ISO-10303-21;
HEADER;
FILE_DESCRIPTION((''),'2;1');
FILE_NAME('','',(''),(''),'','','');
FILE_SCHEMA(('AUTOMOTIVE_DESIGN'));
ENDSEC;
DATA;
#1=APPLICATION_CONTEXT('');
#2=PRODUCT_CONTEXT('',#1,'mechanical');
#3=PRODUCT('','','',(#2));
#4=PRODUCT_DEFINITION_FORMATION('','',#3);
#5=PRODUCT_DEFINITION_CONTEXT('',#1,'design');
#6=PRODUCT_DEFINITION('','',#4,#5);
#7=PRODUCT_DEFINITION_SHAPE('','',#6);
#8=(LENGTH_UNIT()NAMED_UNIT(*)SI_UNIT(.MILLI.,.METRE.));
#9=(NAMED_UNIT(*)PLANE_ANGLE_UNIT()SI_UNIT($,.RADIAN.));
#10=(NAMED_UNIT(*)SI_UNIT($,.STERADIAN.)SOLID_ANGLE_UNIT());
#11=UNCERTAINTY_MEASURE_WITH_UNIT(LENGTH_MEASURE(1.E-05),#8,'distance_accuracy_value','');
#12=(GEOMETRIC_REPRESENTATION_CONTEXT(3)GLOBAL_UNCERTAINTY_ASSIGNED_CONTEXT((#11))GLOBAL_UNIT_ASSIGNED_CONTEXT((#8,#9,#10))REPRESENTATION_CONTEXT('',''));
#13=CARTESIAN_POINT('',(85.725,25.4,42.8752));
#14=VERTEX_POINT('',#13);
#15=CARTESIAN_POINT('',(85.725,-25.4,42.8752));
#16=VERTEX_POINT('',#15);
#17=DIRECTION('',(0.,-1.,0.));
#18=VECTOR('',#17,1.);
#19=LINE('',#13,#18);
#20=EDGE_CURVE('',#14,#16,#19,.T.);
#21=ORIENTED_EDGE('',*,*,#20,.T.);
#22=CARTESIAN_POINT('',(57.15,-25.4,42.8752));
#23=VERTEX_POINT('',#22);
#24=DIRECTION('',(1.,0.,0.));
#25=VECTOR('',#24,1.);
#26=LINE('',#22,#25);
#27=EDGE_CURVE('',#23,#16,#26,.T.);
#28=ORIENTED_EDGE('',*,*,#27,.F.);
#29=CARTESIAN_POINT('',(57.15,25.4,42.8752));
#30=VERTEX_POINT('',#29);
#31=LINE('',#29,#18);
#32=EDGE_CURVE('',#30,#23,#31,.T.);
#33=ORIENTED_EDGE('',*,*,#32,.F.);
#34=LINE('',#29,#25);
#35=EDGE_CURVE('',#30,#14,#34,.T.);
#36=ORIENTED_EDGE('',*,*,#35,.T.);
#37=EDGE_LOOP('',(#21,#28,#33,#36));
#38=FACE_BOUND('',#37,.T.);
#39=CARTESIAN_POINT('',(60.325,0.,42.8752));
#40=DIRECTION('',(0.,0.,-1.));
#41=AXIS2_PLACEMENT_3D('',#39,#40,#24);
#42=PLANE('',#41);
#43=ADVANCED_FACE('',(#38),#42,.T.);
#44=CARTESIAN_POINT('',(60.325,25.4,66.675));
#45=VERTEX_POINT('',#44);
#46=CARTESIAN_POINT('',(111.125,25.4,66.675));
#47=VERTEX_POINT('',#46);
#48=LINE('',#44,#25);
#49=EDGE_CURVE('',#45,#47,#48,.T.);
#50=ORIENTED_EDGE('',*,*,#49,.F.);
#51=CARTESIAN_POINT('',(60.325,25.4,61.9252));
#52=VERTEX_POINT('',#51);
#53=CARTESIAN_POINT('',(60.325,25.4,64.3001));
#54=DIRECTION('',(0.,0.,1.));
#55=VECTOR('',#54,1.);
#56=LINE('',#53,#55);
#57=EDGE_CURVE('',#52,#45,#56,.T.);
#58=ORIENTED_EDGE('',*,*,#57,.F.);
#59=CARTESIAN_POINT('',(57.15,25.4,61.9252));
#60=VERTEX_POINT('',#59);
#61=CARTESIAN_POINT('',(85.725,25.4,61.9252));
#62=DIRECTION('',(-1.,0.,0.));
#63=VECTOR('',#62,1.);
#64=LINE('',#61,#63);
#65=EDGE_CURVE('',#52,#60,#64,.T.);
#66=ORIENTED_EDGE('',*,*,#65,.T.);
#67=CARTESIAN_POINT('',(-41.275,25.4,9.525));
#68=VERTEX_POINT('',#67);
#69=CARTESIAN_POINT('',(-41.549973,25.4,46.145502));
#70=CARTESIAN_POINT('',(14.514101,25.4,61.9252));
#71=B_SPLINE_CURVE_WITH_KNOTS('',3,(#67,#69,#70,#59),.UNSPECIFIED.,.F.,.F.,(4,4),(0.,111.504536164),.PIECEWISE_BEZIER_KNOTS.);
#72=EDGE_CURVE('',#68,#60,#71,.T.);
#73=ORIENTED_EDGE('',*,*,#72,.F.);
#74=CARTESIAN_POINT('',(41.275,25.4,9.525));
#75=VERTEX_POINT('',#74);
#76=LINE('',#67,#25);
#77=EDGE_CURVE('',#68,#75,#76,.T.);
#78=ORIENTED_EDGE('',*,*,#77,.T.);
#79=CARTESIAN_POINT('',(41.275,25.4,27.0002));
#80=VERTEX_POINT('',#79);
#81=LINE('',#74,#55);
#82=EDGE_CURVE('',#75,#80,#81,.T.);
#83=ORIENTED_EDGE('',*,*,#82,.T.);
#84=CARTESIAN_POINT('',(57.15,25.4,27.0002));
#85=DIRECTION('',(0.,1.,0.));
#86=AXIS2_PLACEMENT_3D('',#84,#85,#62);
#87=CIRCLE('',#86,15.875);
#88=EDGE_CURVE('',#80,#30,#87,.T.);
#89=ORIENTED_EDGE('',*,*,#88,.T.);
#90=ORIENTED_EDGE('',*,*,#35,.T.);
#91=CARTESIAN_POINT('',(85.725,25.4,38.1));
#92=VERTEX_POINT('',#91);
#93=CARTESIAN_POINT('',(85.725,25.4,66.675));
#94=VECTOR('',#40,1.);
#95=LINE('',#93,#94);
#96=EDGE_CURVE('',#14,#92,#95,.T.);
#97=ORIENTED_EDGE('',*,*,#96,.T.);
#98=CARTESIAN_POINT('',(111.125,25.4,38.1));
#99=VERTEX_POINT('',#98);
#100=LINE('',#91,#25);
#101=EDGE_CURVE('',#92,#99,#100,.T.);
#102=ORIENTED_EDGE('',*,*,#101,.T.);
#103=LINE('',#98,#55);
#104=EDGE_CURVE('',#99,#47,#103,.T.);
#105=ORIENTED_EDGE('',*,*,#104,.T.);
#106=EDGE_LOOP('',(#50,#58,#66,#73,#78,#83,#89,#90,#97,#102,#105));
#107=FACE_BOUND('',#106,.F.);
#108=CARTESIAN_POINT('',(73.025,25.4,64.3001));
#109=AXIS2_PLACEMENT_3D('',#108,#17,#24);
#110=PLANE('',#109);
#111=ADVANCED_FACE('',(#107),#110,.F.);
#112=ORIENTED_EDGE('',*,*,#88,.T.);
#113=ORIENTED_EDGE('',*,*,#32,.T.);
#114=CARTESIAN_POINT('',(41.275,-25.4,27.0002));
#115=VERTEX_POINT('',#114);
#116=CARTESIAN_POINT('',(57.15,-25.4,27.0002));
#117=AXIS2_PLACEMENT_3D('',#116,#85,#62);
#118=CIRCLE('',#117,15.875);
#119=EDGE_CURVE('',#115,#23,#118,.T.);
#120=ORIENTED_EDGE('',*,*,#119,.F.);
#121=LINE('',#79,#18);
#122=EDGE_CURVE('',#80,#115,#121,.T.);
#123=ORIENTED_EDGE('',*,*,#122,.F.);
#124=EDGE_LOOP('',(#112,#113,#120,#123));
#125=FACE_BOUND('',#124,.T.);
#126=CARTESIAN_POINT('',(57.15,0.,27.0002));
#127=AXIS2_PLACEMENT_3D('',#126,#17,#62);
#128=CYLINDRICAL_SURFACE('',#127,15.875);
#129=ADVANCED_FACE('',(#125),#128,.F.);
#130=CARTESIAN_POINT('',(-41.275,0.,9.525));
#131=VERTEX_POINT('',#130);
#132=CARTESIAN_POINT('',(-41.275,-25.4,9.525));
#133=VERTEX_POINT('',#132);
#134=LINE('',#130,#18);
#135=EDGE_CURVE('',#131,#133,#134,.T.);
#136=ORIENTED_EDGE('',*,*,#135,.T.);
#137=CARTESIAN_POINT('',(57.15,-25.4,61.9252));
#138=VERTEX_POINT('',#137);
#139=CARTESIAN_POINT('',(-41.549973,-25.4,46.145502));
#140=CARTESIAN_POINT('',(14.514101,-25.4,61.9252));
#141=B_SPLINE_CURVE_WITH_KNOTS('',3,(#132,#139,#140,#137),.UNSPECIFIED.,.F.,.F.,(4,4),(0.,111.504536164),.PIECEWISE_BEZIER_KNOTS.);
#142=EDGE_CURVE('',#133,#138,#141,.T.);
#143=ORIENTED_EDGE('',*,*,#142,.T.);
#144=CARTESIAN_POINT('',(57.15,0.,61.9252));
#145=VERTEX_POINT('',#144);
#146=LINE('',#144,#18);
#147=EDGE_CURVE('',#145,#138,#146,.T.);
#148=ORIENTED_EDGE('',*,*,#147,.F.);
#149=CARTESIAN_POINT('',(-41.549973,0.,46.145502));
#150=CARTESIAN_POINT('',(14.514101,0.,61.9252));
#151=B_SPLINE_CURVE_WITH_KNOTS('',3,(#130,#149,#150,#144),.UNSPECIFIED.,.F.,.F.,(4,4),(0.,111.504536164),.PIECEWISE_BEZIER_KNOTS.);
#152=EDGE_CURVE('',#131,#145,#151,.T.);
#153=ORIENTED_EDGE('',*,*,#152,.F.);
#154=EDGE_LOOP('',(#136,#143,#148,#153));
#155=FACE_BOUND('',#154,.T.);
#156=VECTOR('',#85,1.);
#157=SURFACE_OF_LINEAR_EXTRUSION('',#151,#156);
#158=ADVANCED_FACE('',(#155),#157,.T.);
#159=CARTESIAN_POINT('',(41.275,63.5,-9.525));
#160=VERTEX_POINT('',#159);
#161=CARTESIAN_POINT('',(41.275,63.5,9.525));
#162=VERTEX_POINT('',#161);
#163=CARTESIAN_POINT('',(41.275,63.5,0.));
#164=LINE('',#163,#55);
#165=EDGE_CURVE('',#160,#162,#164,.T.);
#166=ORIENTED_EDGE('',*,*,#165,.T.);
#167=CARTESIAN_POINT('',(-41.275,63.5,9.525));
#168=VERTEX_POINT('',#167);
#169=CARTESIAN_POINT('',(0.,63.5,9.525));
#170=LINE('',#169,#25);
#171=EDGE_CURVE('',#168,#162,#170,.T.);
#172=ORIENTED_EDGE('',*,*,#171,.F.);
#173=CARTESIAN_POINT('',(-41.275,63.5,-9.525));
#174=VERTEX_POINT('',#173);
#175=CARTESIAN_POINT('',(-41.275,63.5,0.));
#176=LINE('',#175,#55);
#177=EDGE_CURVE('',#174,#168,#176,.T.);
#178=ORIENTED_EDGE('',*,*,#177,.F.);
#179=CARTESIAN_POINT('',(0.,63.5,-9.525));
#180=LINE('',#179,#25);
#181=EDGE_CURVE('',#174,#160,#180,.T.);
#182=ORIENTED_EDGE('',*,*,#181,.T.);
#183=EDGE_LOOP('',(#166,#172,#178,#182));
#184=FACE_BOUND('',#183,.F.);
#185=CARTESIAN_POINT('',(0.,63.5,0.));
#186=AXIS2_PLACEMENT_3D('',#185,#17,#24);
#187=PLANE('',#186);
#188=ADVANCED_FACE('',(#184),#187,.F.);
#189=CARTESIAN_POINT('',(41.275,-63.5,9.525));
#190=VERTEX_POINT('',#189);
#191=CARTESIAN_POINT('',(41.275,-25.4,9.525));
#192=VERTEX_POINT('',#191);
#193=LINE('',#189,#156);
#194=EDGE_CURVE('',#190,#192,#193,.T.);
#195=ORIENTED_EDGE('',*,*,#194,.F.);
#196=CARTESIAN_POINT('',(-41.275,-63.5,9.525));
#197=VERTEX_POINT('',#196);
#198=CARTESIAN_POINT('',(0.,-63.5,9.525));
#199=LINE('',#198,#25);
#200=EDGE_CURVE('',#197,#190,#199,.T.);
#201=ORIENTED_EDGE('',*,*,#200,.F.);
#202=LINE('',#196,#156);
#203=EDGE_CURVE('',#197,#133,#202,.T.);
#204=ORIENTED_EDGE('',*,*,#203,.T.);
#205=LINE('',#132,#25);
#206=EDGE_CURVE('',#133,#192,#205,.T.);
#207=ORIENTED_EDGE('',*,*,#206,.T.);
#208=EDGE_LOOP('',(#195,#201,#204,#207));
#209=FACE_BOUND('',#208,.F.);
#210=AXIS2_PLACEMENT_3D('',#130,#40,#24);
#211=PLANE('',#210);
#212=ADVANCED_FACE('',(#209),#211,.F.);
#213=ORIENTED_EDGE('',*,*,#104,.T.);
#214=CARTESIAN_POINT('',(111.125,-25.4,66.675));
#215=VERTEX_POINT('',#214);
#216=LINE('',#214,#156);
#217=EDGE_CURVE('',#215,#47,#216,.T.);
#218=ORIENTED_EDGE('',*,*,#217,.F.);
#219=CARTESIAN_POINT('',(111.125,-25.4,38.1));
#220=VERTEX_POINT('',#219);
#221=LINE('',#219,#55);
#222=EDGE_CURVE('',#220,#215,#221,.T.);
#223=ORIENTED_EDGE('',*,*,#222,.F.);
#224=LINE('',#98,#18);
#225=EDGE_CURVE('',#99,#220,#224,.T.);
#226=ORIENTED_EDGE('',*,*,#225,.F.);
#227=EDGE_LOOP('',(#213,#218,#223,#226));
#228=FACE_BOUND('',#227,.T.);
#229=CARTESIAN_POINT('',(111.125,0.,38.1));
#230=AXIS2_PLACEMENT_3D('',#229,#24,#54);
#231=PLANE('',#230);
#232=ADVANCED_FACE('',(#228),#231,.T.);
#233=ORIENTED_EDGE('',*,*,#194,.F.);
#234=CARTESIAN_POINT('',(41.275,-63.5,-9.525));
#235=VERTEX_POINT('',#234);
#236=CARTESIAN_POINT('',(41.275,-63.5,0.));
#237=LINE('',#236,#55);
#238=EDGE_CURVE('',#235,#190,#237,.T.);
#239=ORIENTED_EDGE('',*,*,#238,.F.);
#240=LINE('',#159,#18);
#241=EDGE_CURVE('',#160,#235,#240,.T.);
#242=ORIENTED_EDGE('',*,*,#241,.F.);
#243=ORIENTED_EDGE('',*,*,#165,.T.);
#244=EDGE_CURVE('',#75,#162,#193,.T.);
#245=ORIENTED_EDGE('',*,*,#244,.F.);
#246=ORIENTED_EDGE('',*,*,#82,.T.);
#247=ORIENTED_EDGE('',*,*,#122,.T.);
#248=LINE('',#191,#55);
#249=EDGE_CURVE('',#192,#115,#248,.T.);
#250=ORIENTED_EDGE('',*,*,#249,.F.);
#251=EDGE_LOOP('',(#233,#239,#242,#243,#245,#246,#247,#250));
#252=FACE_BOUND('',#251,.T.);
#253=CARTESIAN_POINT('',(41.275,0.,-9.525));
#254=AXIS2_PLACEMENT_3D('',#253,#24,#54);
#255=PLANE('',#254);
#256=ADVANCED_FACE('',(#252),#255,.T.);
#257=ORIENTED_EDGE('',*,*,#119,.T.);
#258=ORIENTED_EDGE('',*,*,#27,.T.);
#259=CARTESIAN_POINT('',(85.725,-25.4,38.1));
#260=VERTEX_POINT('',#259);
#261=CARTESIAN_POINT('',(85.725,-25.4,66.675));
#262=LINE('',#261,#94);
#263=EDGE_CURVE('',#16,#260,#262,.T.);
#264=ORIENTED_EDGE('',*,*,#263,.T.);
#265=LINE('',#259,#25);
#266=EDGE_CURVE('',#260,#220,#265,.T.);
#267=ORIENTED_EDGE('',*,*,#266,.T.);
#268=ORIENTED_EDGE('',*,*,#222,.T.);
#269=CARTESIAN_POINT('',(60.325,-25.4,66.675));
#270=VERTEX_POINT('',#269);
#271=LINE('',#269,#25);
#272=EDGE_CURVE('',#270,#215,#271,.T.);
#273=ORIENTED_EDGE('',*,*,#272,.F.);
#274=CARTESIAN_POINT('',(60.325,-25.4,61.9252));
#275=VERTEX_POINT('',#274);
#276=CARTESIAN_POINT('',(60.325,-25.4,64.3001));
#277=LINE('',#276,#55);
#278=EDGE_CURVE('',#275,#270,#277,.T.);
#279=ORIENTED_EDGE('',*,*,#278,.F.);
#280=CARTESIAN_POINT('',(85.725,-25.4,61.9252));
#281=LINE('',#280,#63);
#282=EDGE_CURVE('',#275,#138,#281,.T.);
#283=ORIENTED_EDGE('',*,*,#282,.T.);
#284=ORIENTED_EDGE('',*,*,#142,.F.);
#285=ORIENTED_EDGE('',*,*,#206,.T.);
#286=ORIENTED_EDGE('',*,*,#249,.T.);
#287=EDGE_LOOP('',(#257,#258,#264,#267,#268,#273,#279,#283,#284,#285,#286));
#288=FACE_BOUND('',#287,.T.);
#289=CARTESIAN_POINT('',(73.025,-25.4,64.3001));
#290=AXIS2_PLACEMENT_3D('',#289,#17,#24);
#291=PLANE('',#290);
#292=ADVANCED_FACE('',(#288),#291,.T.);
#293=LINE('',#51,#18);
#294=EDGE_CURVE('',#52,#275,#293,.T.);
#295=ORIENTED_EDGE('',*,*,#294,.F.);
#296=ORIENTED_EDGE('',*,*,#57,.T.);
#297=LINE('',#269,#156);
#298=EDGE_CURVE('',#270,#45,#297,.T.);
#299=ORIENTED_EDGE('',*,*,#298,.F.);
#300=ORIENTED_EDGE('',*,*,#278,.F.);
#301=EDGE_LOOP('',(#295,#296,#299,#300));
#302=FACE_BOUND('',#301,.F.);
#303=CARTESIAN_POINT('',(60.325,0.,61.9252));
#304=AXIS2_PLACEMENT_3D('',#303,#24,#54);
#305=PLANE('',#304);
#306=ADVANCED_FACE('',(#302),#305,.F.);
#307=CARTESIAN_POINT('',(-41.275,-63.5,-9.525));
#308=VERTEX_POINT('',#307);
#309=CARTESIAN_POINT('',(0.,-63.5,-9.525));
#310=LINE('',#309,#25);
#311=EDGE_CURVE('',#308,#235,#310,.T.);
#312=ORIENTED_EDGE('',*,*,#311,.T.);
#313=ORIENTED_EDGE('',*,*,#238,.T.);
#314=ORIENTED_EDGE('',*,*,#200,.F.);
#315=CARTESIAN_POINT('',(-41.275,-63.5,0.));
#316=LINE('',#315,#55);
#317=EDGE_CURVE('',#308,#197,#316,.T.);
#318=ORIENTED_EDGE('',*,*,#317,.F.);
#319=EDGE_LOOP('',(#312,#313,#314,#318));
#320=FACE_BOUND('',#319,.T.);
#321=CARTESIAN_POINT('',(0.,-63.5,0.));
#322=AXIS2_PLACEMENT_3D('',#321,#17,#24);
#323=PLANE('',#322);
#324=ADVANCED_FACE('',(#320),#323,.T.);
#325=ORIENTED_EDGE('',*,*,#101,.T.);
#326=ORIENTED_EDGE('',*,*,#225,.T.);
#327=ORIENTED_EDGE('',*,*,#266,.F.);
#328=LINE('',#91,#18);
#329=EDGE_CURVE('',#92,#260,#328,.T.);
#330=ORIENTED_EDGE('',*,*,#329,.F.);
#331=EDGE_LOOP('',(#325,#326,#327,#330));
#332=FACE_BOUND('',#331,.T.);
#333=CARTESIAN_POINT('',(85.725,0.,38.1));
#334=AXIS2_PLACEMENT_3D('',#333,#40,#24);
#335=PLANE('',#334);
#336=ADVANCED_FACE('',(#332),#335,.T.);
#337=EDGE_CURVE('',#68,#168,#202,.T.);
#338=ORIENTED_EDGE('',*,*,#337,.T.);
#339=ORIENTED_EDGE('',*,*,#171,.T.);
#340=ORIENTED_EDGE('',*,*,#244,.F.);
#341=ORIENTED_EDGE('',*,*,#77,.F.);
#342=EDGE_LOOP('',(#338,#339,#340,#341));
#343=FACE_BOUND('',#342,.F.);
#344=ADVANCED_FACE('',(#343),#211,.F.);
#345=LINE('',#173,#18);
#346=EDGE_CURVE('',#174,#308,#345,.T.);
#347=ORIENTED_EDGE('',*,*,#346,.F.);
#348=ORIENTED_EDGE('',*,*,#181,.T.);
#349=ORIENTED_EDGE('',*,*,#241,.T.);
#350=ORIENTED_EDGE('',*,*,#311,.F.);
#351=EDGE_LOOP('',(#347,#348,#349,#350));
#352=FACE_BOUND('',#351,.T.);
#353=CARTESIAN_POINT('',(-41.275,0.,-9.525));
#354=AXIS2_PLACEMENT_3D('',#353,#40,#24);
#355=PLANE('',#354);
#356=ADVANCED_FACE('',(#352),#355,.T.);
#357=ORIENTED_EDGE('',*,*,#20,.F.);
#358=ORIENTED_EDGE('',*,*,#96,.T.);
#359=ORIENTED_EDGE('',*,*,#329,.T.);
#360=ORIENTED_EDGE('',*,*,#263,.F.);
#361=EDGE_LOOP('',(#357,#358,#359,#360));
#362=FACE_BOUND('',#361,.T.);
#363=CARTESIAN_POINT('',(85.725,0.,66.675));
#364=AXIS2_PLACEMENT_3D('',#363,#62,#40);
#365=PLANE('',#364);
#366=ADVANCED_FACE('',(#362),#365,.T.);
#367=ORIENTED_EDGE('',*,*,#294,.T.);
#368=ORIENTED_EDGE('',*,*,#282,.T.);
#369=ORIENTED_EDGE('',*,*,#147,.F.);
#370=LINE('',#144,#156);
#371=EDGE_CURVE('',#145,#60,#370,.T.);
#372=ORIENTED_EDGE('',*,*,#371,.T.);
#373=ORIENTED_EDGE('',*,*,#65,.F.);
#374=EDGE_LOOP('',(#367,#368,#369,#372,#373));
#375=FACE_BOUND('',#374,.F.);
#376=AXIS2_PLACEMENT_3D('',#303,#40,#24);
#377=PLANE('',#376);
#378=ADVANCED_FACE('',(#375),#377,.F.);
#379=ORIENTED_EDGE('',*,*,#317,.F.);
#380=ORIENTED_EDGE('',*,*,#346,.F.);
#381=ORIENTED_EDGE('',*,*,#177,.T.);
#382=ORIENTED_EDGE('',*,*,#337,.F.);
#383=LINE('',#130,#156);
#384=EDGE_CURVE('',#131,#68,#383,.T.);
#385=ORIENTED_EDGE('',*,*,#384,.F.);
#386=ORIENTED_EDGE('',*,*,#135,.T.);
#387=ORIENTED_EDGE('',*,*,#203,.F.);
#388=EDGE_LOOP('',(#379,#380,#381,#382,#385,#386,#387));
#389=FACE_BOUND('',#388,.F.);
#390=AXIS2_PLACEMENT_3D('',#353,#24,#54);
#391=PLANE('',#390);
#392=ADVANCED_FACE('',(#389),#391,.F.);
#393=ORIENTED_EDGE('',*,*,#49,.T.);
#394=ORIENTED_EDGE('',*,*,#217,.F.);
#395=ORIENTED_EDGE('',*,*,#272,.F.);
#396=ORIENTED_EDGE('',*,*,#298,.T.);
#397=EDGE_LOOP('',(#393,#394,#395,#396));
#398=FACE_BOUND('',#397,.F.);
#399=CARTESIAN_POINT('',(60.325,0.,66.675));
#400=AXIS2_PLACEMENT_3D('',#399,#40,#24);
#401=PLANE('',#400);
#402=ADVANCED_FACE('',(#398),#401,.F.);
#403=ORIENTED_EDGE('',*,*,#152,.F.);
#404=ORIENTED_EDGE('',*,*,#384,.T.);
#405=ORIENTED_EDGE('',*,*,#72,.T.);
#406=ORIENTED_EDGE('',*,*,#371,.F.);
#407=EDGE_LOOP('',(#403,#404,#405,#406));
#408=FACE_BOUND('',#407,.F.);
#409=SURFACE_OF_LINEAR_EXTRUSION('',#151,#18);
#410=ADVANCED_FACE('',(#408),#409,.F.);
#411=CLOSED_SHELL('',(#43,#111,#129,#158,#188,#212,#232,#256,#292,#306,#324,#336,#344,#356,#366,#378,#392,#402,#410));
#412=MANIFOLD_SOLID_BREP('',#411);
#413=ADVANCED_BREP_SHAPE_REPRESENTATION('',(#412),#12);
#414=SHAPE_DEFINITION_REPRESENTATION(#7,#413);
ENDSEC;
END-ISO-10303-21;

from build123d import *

# Parameters (mm, degrees)
F0_W     = 82.55
F0_H     = 19.05
F1_DEPTH = 63.5
F2_DEPTH = 25.4
F0_W_2   = 25.4
F3_DEPTH = 25.4
F4_DEPTH = 25.4
F0_H_2   = 4.7498
F5_DEPTH = 25.4


with BuildPart() as f1:
    # F0 (on Front) → F1 (new body, symmetric)
    with BuildSketch(Plane.XZ):
        Rectangle(F0_W, F0_H)
    extrude(amount=F1_DEPTH, both=True)

    # F0 (on Front) → F2 (join, symmetric)
    with BuildSketch(Plane.XZ):
        with BuildLine():
            Line((-41.275, 9.525), (41.275, 9.525))
            Line((41.275, 9.525), (41.275, 27.0002))
            ThreePointArc((41.275, 27.0002), (45.9246798487, 38.2255201513), (57.15, 42.8752))
            Line((57.15, 42.8752), (60.325, 42.8752))
            Line((60.325, 42.8752), (60.325, 61.9252))
            Line((60.325, 61.9252), (57.15, 61.9252))
            add(Edge.make_bspline(
                [(-41.275, 9.525), (-41.5499731898, 46.1455024779), (14.5141012144, 61.9252), (57.15, 61.9252)],
                knots=[0, 0, 0, 0, 111.5045361635, 111.5045361635, 111.5045361635, 111.5045361635], degree=3))
        make_face()
    extrude(amount=F2_DEPTH, both=True)

    # F0 (on Front) → F3 (join, symmetric)
    with BuildSketch(Plane.XZ):
        with Locations((73.025, 52.4002)):
            Rectangle(F0_W_2, F0_H)
    extrude(amount=F3_DEPTH, both=True)

    # F0 (on Front) → F4 (join, symmetric)
    with BuildSketch(Plane.XZ):
        Polygon((85.725, 66.675), (85.725, 61.9252), (85.725, 42.8752), (85.725, 38.1), (111.125, 38.1), (111.125, 66.675), align=None)
    extrude(amount=F4_DEPTH, both=True)

    # F0 (on Front) → F5 (join, symmetric)
    with BuildSketch(Plane.XZ):
        with Locations((73.025, 64.3001)):
            Rectangle(F0_W_2, F0_H_2)
    extrude(amount=F5_DEPTH, both=True)


solid = f1.part
